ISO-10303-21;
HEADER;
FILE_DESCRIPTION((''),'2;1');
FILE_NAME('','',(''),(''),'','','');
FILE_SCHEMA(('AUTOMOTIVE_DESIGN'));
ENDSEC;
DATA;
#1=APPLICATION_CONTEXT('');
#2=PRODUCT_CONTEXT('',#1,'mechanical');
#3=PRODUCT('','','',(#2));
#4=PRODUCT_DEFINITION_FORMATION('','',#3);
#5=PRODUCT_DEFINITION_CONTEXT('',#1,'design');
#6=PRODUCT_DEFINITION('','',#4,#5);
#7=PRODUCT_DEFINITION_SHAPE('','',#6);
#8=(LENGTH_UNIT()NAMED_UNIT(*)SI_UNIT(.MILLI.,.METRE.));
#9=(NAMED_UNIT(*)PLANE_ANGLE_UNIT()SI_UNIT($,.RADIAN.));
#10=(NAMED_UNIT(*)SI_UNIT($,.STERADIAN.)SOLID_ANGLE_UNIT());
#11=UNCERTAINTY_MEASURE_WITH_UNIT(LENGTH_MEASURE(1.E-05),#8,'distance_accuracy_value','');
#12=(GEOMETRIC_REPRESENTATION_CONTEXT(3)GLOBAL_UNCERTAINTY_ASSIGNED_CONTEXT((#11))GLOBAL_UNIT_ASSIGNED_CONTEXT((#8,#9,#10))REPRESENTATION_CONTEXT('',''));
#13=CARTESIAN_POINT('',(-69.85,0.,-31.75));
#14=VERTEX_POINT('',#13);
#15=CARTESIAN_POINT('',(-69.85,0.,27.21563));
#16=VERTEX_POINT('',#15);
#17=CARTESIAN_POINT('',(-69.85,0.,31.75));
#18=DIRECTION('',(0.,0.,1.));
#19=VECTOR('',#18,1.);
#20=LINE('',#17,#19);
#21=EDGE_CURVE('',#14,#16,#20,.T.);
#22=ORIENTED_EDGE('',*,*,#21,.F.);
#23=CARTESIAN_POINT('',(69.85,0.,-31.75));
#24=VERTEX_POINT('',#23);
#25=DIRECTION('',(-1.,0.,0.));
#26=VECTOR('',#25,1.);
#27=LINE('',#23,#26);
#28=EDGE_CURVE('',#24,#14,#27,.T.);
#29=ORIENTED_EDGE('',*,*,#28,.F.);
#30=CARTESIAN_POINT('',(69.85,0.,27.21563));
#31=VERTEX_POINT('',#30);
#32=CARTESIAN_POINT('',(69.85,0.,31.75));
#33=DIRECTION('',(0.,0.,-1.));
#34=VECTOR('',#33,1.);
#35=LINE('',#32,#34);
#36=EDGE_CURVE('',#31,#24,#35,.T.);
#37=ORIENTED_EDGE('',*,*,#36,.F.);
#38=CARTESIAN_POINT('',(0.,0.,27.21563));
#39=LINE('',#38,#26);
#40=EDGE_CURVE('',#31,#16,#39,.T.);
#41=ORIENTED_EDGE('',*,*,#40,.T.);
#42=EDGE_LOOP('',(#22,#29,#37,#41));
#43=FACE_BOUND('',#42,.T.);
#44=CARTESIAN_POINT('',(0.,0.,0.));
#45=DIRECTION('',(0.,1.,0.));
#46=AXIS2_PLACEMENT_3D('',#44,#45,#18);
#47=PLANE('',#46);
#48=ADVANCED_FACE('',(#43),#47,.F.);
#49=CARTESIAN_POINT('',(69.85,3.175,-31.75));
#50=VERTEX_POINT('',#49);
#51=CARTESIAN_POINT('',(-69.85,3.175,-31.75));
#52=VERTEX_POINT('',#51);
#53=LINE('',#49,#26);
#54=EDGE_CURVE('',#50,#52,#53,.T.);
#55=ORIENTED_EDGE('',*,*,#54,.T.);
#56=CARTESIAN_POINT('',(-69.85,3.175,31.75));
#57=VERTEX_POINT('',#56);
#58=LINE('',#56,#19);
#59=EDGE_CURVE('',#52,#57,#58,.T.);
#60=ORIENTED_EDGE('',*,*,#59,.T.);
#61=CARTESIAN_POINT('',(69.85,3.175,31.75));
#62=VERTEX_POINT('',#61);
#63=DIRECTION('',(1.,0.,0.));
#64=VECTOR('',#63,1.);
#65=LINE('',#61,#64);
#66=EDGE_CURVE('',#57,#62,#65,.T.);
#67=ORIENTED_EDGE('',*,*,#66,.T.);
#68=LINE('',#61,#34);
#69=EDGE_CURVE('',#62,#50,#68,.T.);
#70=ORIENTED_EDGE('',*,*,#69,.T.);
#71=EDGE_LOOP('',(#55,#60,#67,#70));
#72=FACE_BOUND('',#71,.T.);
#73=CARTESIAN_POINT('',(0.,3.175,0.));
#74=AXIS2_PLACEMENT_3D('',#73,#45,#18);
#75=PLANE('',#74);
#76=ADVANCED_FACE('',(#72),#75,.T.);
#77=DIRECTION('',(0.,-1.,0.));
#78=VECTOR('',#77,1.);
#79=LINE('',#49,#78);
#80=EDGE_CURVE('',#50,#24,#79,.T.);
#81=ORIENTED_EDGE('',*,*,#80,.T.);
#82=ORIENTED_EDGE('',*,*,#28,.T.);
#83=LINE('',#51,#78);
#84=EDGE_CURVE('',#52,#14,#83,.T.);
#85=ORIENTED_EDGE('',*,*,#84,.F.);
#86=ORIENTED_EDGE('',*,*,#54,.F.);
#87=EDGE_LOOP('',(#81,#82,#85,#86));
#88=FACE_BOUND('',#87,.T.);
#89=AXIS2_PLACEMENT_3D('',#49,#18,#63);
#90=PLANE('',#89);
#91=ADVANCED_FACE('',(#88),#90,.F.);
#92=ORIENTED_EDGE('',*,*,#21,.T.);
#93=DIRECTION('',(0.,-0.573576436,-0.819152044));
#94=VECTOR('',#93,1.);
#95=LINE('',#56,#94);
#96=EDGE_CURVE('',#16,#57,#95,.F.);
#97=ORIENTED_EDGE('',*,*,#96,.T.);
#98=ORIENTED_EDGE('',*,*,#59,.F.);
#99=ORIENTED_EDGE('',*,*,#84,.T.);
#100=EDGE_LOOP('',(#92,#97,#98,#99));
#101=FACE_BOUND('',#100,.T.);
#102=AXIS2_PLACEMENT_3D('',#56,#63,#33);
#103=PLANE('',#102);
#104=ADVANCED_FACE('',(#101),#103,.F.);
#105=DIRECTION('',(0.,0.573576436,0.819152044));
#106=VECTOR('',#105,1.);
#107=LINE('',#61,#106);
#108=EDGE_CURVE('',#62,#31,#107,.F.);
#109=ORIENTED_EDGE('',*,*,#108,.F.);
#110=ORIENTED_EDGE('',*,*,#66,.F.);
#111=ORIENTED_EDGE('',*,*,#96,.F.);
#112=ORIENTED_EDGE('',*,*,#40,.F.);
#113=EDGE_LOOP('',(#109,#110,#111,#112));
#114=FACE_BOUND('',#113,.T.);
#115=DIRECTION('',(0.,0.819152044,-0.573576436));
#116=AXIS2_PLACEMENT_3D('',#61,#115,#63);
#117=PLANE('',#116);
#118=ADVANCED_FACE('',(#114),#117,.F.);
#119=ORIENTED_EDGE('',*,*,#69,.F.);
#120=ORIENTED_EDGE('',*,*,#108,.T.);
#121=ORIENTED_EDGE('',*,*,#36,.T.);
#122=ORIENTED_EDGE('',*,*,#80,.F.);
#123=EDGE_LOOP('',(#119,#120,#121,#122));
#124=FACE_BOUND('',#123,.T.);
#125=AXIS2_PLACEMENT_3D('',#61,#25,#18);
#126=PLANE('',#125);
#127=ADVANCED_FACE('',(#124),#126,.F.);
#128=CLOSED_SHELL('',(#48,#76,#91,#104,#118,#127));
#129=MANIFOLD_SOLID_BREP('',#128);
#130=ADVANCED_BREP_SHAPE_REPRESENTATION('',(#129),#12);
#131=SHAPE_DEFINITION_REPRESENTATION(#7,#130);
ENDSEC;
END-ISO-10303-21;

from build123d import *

# Parameters (mm, degrees)
SKETCH1_W           = 139.7
SKETCH1_H           = 63.5
BOSS_EXTRUDE1_DEPTH = 3.175
CHAMFER1_SIZE2      = 4.534369921
CHAMFER1_SIZE       = 3.175


with BuildPart() as part:
    # Sketch1 → Boss-Extrude1 (new body)
    with BuildSketch(Plane(origin=(0, 0, 0), x_dir=(1, 0, 0), z_dir=(0, 1, 0))):
        Rectangle(SKETCH1_W, SKETCH1_H)
    extrude(amount=BOSS_EXTRUDE1_DEPTH)

    # Chamfer1
    chamfer1_edges = [part.edges().sort_by_distance(p)[0] for p in [
        (0, 0, 31.75),
    ]]
    chamfer1_side = [part.faces().sort_by_distance(p)[0] for p in [
        (0, 0.0635, 31.75),
    ]]
    chamfer(chamfer1_edges, length=CHAMFER1_SIZE - 0.0001, length2=CHAMFER1_SIZE2 - 0.0001, reference=chamfer1_side[0])  # a hair under: the kernel refuses the full size


solid = part.part
